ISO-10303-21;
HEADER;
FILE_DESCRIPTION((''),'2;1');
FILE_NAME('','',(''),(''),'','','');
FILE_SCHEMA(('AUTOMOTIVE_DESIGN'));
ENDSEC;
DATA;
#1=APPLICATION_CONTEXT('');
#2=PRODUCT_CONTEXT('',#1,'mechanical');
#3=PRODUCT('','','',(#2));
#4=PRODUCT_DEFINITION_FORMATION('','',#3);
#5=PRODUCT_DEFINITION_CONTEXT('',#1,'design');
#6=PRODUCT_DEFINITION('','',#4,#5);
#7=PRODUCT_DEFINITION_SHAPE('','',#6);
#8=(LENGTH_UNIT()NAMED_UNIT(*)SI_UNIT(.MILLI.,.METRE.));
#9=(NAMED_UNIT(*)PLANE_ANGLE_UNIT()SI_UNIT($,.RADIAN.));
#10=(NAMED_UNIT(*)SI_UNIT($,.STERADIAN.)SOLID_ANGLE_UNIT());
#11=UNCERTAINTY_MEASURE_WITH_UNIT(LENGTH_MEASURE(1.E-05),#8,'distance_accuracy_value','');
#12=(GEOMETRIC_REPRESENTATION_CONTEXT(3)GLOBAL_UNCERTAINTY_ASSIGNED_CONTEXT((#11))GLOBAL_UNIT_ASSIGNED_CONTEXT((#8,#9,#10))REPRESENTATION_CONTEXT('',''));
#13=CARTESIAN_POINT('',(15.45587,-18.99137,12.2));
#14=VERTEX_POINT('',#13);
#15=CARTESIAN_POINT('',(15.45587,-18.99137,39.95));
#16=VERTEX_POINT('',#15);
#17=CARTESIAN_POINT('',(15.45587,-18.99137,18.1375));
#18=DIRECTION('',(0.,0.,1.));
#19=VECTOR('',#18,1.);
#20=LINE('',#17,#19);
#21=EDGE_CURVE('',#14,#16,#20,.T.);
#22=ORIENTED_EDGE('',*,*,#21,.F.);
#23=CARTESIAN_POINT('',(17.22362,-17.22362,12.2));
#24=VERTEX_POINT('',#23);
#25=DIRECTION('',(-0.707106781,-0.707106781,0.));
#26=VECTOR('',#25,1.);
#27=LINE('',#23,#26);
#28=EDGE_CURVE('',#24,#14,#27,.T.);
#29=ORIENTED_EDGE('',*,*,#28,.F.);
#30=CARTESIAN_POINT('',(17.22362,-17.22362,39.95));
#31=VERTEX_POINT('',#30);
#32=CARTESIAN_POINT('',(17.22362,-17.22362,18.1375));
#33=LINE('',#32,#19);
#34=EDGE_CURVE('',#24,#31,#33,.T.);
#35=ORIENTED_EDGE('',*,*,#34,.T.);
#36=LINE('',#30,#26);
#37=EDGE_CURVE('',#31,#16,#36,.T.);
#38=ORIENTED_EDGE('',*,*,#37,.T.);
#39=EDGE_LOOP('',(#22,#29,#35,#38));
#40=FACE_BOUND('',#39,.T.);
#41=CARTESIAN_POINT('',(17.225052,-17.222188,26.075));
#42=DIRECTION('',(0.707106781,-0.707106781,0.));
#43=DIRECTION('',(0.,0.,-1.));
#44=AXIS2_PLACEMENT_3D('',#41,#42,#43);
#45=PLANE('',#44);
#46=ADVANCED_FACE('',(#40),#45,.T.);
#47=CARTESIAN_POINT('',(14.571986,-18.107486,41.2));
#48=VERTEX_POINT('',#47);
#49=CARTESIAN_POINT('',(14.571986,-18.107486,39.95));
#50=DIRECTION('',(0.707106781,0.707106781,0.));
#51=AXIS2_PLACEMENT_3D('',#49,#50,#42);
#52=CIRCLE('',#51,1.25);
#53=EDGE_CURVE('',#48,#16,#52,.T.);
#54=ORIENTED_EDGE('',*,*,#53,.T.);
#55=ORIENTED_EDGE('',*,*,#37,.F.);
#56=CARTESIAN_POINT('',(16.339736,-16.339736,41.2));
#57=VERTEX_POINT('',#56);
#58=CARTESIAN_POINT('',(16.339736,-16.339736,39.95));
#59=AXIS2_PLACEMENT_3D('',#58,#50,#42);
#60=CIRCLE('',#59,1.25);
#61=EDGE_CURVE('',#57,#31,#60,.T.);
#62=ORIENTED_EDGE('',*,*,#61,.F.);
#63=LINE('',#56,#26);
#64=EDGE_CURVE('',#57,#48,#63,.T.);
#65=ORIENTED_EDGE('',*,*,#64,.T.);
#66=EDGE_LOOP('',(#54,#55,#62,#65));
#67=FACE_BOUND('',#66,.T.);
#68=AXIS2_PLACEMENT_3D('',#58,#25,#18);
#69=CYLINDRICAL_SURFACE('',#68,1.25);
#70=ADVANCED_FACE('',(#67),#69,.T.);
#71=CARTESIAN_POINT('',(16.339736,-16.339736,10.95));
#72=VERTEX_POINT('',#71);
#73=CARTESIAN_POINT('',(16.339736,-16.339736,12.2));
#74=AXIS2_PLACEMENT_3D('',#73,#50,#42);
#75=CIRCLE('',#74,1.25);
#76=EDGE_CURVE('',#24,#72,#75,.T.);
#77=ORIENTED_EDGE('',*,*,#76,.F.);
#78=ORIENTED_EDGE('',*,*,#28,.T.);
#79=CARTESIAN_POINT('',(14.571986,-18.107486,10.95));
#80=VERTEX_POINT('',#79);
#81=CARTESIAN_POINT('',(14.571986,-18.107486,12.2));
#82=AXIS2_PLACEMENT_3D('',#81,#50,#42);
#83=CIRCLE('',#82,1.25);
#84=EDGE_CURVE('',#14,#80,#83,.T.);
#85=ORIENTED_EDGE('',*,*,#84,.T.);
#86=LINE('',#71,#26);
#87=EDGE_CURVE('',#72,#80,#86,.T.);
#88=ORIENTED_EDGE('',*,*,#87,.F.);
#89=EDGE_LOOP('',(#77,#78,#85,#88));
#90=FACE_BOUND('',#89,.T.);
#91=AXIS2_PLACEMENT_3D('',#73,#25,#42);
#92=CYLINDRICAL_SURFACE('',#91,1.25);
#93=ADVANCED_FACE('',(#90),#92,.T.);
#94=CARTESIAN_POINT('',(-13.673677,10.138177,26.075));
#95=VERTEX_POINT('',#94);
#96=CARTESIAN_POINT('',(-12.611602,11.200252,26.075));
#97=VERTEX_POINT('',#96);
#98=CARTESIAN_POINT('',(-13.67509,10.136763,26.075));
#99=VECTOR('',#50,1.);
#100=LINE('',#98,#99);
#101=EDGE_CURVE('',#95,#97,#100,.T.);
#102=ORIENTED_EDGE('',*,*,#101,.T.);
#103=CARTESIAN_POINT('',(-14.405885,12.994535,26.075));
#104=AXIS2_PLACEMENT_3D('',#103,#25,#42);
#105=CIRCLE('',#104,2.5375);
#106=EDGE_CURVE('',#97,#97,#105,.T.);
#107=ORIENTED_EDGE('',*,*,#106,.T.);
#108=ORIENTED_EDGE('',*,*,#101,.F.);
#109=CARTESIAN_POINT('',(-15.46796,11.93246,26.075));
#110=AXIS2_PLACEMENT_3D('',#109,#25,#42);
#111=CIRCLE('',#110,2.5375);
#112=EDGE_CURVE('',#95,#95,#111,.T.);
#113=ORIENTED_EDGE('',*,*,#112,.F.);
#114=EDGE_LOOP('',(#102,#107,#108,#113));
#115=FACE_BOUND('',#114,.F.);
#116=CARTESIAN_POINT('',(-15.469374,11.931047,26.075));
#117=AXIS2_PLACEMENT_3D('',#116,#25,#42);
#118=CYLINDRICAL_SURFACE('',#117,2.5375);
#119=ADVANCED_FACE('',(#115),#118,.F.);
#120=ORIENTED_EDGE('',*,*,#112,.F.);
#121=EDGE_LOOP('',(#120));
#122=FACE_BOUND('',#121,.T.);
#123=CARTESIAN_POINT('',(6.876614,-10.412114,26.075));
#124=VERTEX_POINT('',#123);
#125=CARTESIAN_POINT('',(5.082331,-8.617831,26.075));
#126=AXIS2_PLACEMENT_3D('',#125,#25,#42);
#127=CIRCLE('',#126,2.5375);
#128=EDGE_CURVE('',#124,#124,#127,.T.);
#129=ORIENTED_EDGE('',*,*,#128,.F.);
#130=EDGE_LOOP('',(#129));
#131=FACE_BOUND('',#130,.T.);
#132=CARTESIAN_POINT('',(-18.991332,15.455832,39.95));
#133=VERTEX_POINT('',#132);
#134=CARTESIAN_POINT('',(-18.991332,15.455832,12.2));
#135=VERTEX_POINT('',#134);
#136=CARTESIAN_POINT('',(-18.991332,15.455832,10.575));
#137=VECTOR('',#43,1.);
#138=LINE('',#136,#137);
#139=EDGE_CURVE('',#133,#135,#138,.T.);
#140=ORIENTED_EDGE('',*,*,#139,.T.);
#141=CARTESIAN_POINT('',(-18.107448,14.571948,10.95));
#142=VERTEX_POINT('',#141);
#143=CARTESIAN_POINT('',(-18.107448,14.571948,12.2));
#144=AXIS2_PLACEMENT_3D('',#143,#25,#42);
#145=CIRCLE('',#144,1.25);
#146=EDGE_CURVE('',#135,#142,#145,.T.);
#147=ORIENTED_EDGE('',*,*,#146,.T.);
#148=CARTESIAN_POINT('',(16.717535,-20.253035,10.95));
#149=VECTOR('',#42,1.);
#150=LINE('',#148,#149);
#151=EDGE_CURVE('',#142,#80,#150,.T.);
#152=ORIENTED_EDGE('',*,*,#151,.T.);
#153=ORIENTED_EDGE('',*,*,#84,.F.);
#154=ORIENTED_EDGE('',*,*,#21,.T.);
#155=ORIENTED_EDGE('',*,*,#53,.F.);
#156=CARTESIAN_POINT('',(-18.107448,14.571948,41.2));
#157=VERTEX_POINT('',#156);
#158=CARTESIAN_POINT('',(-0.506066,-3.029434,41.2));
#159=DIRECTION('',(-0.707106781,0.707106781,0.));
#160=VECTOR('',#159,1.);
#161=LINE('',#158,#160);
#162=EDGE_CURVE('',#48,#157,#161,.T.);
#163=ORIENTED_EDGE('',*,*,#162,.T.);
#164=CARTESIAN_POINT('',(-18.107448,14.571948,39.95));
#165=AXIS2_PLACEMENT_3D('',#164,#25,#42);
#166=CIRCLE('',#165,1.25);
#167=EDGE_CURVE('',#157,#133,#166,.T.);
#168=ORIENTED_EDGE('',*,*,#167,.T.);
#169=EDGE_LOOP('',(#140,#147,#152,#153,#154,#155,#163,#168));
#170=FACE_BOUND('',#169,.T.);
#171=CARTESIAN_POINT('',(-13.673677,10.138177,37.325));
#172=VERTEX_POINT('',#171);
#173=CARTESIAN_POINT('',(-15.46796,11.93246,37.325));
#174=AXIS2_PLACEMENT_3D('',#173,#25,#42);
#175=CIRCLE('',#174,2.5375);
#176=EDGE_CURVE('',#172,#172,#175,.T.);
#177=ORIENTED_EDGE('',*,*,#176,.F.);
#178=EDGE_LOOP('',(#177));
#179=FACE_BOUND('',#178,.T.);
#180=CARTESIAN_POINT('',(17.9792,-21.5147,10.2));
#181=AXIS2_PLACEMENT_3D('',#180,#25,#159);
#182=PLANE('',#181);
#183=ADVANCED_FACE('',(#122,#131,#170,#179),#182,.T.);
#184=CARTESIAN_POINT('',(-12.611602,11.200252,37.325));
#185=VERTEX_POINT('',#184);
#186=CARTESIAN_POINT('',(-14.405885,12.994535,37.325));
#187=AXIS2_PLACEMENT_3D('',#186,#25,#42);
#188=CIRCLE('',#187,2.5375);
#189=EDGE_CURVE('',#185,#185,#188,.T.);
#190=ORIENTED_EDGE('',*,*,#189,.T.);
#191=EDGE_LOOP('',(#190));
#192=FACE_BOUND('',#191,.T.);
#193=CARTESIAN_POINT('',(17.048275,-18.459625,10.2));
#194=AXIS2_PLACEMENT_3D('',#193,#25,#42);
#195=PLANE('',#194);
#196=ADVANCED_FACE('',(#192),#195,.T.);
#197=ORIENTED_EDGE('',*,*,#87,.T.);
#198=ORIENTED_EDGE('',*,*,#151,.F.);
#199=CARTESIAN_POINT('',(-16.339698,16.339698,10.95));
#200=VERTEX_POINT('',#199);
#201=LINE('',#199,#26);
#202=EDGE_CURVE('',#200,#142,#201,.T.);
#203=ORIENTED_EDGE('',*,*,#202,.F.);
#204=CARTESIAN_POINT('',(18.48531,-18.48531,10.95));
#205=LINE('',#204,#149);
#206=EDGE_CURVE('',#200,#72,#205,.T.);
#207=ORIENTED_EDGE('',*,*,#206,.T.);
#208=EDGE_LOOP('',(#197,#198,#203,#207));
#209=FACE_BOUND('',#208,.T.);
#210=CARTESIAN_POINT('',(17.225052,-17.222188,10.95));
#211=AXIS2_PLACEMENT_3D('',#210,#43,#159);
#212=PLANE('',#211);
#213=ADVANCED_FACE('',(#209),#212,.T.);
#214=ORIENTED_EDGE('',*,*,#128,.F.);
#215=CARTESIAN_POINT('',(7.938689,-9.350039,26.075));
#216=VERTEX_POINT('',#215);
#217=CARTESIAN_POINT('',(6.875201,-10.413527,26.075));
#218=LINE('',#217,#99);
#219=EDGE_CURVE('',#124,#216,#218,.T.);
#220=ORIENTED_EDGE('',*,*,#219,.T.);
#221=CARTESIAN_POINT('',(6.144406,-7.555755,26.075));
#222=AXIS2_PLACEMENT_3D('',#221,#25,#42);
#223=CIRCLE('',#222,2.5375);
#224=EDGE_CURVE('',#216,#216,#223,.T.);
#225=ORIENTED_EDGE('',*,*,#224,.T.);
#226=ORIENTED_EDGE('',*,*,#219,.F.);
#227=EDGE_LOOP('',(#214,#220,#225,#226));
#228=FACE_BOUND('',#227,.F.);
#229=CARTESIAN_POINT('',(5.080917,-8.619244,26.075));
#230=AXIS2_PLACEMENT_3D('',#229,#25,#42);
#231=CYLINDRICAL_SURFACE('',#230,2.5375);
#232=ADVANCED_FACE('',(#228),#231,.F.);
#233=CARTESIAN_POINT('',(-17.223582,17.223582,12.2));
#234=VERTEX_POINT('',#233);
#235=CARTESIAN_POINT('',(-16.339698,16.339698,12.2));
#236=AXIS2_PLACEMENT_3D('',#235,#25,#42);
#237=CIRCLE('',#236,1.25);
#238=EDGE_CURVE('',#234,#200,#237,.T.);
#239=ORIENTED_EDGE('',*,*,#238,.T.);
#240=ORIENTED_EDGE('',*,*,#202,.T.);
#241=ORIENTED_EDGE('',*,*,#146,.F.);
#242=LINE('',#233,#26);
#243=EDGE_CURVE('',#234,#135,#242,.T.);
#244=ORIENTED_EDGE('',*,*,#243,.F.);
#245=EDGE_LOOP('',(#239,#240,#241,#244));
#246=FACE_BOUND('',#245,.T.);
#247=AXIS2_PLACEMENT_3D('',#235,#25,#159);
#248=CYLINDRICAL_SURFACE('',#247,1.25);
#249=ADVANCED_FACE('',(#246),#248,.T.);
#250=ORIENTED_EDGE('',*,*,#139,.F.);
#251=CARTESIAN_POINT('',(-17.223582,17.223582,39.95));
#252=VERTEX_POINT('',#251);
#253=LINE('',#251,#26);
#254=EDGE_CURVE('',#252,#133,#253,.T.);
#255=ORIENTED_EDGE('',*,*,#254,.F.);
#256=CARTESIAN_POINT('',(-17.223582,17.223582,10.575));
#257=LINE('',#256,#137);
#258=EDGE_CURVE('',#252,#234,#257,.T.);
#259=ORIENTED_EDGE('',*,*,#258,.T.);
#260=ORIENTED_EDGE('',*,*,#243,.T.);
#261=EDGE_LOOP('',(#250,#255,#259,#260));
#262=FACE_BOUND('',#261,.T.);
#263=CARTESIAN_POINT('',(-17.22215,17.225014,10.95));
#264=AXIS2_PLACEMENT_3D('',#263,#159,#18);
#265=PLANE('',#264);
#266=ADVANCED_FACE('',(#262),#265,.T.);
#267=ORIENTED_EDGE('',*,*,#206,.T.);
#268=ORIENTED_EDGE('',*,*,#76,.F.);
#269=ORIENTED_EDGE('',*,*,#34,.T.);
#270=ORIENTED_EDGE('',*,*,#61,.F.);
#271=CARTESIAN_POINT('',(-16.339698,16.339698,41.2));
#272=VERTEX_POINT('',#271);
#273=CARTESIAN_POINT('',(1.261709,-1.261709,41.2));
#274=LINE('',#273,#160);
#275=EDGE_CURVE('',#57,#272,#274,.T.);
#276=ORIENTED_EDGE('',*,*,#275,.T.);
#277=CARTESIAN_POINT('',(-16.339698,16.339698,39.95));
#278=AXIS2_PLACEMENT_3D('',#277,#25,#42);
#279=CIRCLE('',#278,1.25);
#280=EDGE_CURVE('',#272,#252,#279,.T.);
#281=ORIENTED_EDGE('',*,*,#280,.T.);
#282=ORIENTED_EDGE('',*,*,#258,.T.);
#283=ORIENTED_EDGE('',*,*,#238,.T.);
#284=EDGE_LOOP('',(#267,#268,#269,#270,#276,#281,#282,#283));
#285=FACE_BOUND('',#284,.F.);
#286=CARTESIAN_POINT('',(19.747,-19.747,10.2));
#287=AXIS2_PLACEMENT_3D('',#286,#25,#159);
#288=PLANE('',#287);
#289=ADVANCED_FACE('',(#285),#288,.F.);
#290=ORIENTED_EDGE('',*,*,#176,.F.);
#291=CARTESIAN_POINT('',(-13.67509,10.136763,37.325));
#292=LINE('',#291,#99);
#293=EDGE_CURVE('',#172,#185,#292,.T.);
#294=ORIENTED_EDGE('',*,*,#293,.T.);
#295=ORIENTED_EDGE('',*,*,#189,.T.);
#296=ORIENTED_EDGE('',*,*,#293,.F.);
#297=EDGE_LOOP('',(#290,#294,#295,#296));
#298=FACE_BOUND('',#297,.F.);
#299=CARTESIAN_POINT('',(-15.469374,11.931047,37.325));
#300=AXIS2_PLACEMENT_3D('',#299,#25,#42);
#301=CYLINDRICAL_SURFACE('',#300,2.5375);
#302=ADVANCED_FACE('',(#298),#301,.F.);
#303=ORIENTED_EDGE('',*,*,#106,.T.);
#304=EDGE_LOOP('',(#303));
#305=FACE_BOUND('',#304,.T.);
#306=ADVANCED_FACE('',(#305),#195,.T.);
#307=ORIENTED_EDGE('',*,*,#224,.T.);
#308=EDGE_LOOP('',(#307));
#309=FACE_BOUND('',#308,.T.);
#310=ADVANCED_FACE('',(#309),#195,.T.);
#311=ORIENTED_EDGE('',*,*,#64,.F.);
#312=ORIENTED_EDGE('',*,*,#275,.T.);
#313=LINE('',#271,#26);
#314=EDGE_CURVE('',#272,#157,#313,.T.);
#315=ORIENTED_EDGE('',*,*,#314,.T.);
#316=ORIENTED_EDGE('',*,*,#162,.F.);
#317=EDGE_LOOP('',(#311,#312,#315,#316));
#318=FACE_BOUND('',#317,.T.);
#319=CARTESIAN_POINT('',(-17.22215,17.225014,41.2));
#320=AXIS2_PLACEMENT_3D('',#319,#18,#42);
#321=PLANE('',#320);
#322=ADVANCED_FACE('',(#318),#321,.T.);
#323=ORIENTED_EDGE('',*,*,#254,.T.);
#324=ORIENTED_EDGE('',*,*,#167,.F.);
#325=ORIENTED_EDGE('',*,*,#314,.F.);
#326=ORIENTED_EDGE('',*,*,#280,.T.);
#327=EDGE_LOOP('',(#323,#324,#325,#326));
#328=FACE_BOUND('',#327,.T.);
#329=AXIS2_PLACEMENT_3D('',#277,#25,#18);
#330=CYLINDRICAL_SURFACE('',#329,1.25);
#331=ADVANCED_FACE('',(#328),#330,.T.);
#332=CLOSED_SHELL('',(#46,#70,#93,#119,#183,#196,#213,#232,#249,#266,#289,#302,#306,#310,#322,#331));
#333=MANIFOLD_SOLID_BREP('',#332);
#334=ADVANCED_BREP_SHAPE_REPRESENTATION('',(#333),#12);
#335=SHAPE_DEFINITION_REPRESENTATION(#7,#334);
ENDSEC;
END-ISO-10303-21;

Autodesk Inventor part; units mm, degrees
sketch "Sketch1" plane through (0, 0, 0) normal (0, 0, 1) x (1, 0, 0)
  circle A0 centre (-10, 20.9) radius 1.875 projected
  circle A1 centre (-10, -20.9) radius 1.875 projected
  circle A2 centre (10, 20.9) radius 1.875 projected
  circle A3 centre (10, -20.9) radius 1.875 projected
  circle A4 centre (20.8, -14.4) radius 2.075 projected
  circle A5 centre (20.8, 14.4) radius 2.075 projected
  circle A6 centre (-20.8, 14.4) radius 2.075 projected
  circle A7 centre (-20.8, -14.4) radius 2.075 projected
  line L0 (16.9, -16.9) -> (-16.9, -16.9) projected
  line L1 (-16.9, -16.9) -> (-16.9, 16.9) projected
  line L2 (-16.9, 16.9) -> (16.9, 16.9) projected
  line L3 (16.9, 16.9) -> (16.9, -16.9) projected
  line L4 (-17.05, 24.9) -> (-17.05, 22.55) projected
  line L5 (-17.05, 22.55) -> (-22.55, 17.05) projected
  line L6 (-22.55, 17.05) -> (-24.9, 17.05) projected
  line L7 (-24.9, 17.05) -> (-24.9, -17.05) projected
  line L8 (-24.9, -17.05) -> (-22.55, -17.05) projected
  line L9 (-22.55, -17.05) -> (-17.05, -22.55) projected
  line L10 (-17.05, -22.55) -> (-17.05, -24.9) projected
  line L11 (-17.05, -24.9) -> (17.05, -24.9) projected
  line L12 (17.05, -24.9) -> (17.05, -22.55) projected
  line L13 (17.05, -22.55) -> (22.55, -17.05) projected
  line L14 (22.55, -17.05) -> (24.9, -17.05) projected
  line L15 (24.9, -17.05) -> (24.9, 17.05) projected
  line L16 (24.9, 17.05) -> (22.55, 17.05) projected
  line L17 (22.55, 17.05) -> (17.05, 22.55) projected
  line L18 (17.05, 22.55) -> (17.05, 24.9) projected
  line L19 (17.05, 24.9) -> (-17.05, 24.9) projected
  line L20 (-16.975, 24.825) -> (-16.975, 22.5189)
  line L21 (-16.975, 22.5189) -> (-22.5189, 16.975)
  line L22 (-22.5189, 16.975) -> (-24.825, 16.975)
  line L23 (-24.825, 16.975) -> (-24.825, -16.975)
  line L24 (-24.825, -16.975) -> (-22.5189, -16.975)
  line L25 (-22.5189, -16.975) -> (-16.975, -22.5189)
  line L26 (-16.975, -22.5189) -> (-16.975, -24.825)
  line L27 (-16.975, -24.825) -> (16.975, -24.825)
  line L28 (16.975, -24.825) -> (16.975, -22.5189)
  line L29 (16.975, -22.5189) -> (22.5189, -16.975)
  line L30 (22.5189, -16.975) -> (24.825, -16.975)
  line L31 (24.825, -16.975) -> (24.825, 16.975)
  line L32 (24.825, 16.975) -> (22.5189, 16.975)
  line L33 (22.5189, 16.975) -> (16.975, 22.5189)
  line L34 (16.975, 22.5189) -> (16.975, 24.825)
  line L35 (16.975, 24.825) -> (-16.975, 24.825)
  point P0 (0, 0)
  dimension "d0" = 0.075
ref_plane "Work Plane1" through (-24.9, -24.9, 7.7) normal (0, 0, 1) x (1, 0, 0)
extrude "Extrusion1" add sketch "Sketch1" along normal blind 2.5 from surface at 7.7 contours A0 | A1 | A2 | A3 | A4 | A5 | A6 | A7 | L0 L1 L2 L3 | L35 L34 L33 L32 L31 L30 L29 L28 L27 L26 L25 L24 L23 L22 L21 L20
sketch "Sketch2" plane through (-16.975, -24.825, 10.2) normal (0, 0, 1) x (1, 0, 0)
  line L0 (0, 47.3439) -> (0, 49.65) projected
  line L1 (-5.5439, 41.8) -> (0, 47.3439) projected
  line L2 (-7.85, 41.8) -> (-5.5439, 41.8) projected
  line L3 (-7.85, 7.85) -> (-7.85, 41.8) projected
  line L4 (-5.5439, 7.85) -> (-7.85, 7.85) projected
  line L5 (0, 2.3061) -> (-5.5439, 7.85) projected
  line L6 (0, 0) -> (0, 2.3061) projected
  line L7 (33.95, 0) -> (0, 0) projected
  line L8 (33.95, 2.3061) -> (33.95, 0) projected
  line L9 (39.4939, 7.85) -> (33.95, 2.3061) projected
  line L10 (41.8, 7.85) -> (39.4939, 7.85) projected
  line L11 (41.8, 41.8) -> (41.8, 7.85) projected
  line L12 (39.4939, 41.8) -> (41.8, 41.8) projected
  line L13 (33.95, 47.3439) -> (39.4939, 41.8) projected
  line L14 (33.95, 49.65) -> (33.95, 47.3439) projected
  line L15 (0, 49.65) -> (33.95, 49.65) projected
  line L16 (33.95, 49.65) -> (41.8, 49.65)
  line L17 (41.8, 49.65) -> (41.8, 41.8)
  line L18 (41.8, 41.8) -> (33.95, 41.8)
  line L19 (33.95, 41.8) -> (33.95, 49.65)
  line L20 (41.8, 49.65) -> (31.8, 49.65)
  line L21 (31.8, 49.65) -> (31.8, 44.65)
  line L22 (36.8, 39.65) -> (41.8, 39.65)
  line L23 (41.8, 39.65) -> (41.8, 49.65)
  line L24 (31.8, 44.65) -> (36.8, 39.65)
  line L25 (36.722, 5.078) -> (-2.772, 44.572)
  line L26 (34.9542, 3.3103) -> (-4.5397, 42.8042)
  line L27 (33.95, 0.7789) -> (-7.0711, 41.8)
  line L28 (27.6579, 0) -> (-7.85, 35.5079)
  point P0 (16.975, 24.825)
  point P1 (31.8, 39.65)
  point P2 (34.9542, 3.3103)
  dimension "d3" = 10
  dimension "d4" = 10
  dimension "d5" = 5
  dimension "d6" = 5
  dimension "d7" = 2.5
  dimension "d8" = 2.5
  dimension "d9" = 5
extrude "Extrusion2" add sketch "Sketch2" along normal blind 31.75 contours L25 L9 L26 L1 | L27 L8 L7 L28 L3 L2
sketch "Sketch3" plane through (10.6829, -24.825, 10.2) normal (-0.7071068, -0.7071068, 0) x (0.7071068, -0.7071068, 0)
  line L0 (0, 0) -> (-50.2157, 0) projected
  line L1 (0, 0) -> (0, 31.75) projected
  line L2 (-50.2157, 31.75) -> (0, 31.75) projected
  line L3 (-50.2157, 0) -> (-50.2157, 31.75) projected
  line L4 (-50.2157, 15.875) -> (0, 15.875)
  line L5 (-5.7329, 4.625) -> (-44.4829, 4.625)
  line L6 (-44.4829, 4.625) -> (-44.4829, 27.125)
  line L7 (-44.4829, 27.125) -> (-5.7329, 27.125)
  line L8 (-5.7329, 27.125) -> (-5.7329, 4.625)
  line L9 (-5.7329, 4.625) -> (-44.4829, 27.125) construction
  line L10 (-44.4829, 4.625) -> (-5.7329, 27.125) construction
  circle A0 centre (-44.4829, 27.125) radius 1.9375
  circle A1 centre (-44.4829, 15.875) radius 1.9375
  line L11 (-25.1079, 15.875) -> (-5.7329, 15.875)
  circle A2 centre (-15.4204, 15.875) radius 1.9375
  line L12 (-53.0343, 0) -> (2.8186, 0) projected
  line L13 (-53.0343, 0) -> (-53.0343, 31.75) projected
  line L14 (2.8186, 31.75) -> (-53.0343, 31.75) projected
  line L15 (2.8186, 0) -> (2.8186, 31.75) projected
  line L16 (-0.75, 31) -> (-0.75, 0.75)
  line L17 (-0.75, 0.75) -> (-49.4657, 0.75)
  line L18 (-49.4657, 0.75) -> (-49.4657, 31)
  line L19 (-49.4657, 31) -> (-0.75, 31)
  circle A3 centre (-44.4829, 27.125) radius 2.5375
  circle A4 centre (-44.4829, 15.875) radius 2.5375
  circle A5 centre (-15.4204, 15.875) radius 2.5375
  point P0 (-25.1079, -10.2)
  point P1 (0, 0)
  point P2 (-0.75, 15.875)
  point P3 (-49.4657, 15.875)
  point P4 (0, 0)
  point P5 (0, 31.75)
  dimension "d12" = 38.75
  dimension "d13" = 22.5
  dimension "d14" = 3.875
  dimension "d15" = 3.875
  dimension "d16" = 3.875
  dimension "d21" = 0.75
  dimension "d22" = 5.075
  dimension "d23" = 5.075
  dimension "d24" = 5.075
extrude "Extrusion3" cut sketch "Sketch3" along normal blind 2.5 from surface at -10 contours L0 L3 L4 L18 L17 L16 L1 | L1 L14 L15 L12 | L12 L13 L14 L3 | L4 L16 L19 L18 L3 L2 L1
extrude "Extrusion4" cut sketch "Sketch3" against normal up to surface (5 mm away) contours A1 L6 L4 | L4 L6 A1 | A2 L4 | L4 A2 | L6 A1 L4 | L4 A1 L6 | A0 L6 L7 | L7 L6 A0
extrude "Extrusion5" cut sketch "Sketch3" against normal blind 1.5 from surface at -7.5 contours A4 L6 A1 L4 | L4 A1 L6 A4 | A5 L4 A2 | L4 A2 A5 | A1 L6 L4 | L4 L6 A1 | A4 L4 A1 L6 | L6 A1 L4 A4 | A2 L4 | L4 A2 | A3 L6 A0 L7 | L7 A0 L6 A3 | L6 A1 L4 | L4 A1 L6 | A0 L6 L7 | L7 L6 A0
extrude "Extrusion6" [suppressed]
sketch "Sketch4" plane through (0, 0, 0) normal (0, 1, 0) x (-1, 0, 0)
  line L0 (22.9, 0.025) -> (-22.9, 0.025) projected
  line L1 (22.9, 42.1) -> (22.9, 0.025) projected
  line L2 (22.9, 42.1) -> (17.05, 42.1) projected
  line L3 (17.05, 7.7) -> (17.05, 42.1) projected
  line L4 (-17.05, 7.7) -> (17.05, 7.7) projected
  line L5 (-17.05, 7.7) -> (-17.05, 42.1) projected
  line L6 (-17.05, 42.1) -> (-22.9, 42.1) projected
  line L7 (-22.9, 0.025) -> (-22.9, 42.1) projected
  circle A0 centre (19.9, 34.8) radius 2.0625 projected
  circle A1 centre (-19.9, 34.8) radius 2.0625 projected
  circle A2 centre (19.9, 15) radius 2.0625 projected
  circle A3 centre (-19.9, 15) radius 2.0625 projected
  circle A4 centre (10, 3.85) radius 1.5625 projected
  circle A5 centre (-10, 3.85) radius 1.5625 projected
  line L8 (-17.05, 24.9) -> (17.05, 24.9)
  circle A6 centre (0, 24.9) radius 16.25
  point P0 (0, 0)
  dimension "d27" = 32.5
ref_plane "Work Plane2" through (-22.9, 24.9, 0.025) normal (0, 1, 0) x (0, 0, 1)
extrude "Extrusion7" [suppressed]
ref_plane "Work Plane3" through (0, 0, 0) normal (0.7071068, -0.7071068, 0) x (0, 0, -1)
mirror "Mirror1" [suppressed]
extrude "Extrusion8" cut sketch "Sketch2" against normal up to surface (2.5 mm away) contours L0 L15 L21 L24 L19 L18 L22 L11 L10 L9 L25 L1 | L25 L9 L26 L1 | L15 L14 L19 L24 L21 | L26 L9 L8 L27 L2 L1 | L16 L17 L12 L13 L14 | L13 L18 L24 L19 | L24 L18 L19 | L12 L11 L22 L24 L18 | L28 L7 L6 L5 L4 L3
sketch "Sketch5" plane through (-16.975, -24.825, 41.95) normal (0, 0, 1) x (1, 0, 0)
  line L0 (-7.85, 41.8) -> (-7.85, 35.5079) projected
  line L1 (-7.85, 35.5079) -> (27.6579, 0) projected
  line L2 (27.6579, 0) -> (33.95, 0) projected
  line L3 (33.95, 0) -> (33.95, 0.7789) projected
  line L4 (33.95, 0.7789) -> (-7.0711, 41.8) projected
  line L5 (-7.0711, 41.8) -> (-7.85, 41.8) projected
  point P0 (16.975, 24.825)
extrude "Extrusion9" cut sketch "Sketch5" against normal up to surface (34.25 mm away)
fillet "Fillet1" radius 1.25 4 edges at (-18.1075, 16.3397, 41.2) (16.3397, -18.1075, 41.2) (16.3397, -18.1075, 10.95) (-18.1075, 16.3397, 10.95)
equation "\"d6\" = d5"
properties part number "Mirror Plate Horizontal"
